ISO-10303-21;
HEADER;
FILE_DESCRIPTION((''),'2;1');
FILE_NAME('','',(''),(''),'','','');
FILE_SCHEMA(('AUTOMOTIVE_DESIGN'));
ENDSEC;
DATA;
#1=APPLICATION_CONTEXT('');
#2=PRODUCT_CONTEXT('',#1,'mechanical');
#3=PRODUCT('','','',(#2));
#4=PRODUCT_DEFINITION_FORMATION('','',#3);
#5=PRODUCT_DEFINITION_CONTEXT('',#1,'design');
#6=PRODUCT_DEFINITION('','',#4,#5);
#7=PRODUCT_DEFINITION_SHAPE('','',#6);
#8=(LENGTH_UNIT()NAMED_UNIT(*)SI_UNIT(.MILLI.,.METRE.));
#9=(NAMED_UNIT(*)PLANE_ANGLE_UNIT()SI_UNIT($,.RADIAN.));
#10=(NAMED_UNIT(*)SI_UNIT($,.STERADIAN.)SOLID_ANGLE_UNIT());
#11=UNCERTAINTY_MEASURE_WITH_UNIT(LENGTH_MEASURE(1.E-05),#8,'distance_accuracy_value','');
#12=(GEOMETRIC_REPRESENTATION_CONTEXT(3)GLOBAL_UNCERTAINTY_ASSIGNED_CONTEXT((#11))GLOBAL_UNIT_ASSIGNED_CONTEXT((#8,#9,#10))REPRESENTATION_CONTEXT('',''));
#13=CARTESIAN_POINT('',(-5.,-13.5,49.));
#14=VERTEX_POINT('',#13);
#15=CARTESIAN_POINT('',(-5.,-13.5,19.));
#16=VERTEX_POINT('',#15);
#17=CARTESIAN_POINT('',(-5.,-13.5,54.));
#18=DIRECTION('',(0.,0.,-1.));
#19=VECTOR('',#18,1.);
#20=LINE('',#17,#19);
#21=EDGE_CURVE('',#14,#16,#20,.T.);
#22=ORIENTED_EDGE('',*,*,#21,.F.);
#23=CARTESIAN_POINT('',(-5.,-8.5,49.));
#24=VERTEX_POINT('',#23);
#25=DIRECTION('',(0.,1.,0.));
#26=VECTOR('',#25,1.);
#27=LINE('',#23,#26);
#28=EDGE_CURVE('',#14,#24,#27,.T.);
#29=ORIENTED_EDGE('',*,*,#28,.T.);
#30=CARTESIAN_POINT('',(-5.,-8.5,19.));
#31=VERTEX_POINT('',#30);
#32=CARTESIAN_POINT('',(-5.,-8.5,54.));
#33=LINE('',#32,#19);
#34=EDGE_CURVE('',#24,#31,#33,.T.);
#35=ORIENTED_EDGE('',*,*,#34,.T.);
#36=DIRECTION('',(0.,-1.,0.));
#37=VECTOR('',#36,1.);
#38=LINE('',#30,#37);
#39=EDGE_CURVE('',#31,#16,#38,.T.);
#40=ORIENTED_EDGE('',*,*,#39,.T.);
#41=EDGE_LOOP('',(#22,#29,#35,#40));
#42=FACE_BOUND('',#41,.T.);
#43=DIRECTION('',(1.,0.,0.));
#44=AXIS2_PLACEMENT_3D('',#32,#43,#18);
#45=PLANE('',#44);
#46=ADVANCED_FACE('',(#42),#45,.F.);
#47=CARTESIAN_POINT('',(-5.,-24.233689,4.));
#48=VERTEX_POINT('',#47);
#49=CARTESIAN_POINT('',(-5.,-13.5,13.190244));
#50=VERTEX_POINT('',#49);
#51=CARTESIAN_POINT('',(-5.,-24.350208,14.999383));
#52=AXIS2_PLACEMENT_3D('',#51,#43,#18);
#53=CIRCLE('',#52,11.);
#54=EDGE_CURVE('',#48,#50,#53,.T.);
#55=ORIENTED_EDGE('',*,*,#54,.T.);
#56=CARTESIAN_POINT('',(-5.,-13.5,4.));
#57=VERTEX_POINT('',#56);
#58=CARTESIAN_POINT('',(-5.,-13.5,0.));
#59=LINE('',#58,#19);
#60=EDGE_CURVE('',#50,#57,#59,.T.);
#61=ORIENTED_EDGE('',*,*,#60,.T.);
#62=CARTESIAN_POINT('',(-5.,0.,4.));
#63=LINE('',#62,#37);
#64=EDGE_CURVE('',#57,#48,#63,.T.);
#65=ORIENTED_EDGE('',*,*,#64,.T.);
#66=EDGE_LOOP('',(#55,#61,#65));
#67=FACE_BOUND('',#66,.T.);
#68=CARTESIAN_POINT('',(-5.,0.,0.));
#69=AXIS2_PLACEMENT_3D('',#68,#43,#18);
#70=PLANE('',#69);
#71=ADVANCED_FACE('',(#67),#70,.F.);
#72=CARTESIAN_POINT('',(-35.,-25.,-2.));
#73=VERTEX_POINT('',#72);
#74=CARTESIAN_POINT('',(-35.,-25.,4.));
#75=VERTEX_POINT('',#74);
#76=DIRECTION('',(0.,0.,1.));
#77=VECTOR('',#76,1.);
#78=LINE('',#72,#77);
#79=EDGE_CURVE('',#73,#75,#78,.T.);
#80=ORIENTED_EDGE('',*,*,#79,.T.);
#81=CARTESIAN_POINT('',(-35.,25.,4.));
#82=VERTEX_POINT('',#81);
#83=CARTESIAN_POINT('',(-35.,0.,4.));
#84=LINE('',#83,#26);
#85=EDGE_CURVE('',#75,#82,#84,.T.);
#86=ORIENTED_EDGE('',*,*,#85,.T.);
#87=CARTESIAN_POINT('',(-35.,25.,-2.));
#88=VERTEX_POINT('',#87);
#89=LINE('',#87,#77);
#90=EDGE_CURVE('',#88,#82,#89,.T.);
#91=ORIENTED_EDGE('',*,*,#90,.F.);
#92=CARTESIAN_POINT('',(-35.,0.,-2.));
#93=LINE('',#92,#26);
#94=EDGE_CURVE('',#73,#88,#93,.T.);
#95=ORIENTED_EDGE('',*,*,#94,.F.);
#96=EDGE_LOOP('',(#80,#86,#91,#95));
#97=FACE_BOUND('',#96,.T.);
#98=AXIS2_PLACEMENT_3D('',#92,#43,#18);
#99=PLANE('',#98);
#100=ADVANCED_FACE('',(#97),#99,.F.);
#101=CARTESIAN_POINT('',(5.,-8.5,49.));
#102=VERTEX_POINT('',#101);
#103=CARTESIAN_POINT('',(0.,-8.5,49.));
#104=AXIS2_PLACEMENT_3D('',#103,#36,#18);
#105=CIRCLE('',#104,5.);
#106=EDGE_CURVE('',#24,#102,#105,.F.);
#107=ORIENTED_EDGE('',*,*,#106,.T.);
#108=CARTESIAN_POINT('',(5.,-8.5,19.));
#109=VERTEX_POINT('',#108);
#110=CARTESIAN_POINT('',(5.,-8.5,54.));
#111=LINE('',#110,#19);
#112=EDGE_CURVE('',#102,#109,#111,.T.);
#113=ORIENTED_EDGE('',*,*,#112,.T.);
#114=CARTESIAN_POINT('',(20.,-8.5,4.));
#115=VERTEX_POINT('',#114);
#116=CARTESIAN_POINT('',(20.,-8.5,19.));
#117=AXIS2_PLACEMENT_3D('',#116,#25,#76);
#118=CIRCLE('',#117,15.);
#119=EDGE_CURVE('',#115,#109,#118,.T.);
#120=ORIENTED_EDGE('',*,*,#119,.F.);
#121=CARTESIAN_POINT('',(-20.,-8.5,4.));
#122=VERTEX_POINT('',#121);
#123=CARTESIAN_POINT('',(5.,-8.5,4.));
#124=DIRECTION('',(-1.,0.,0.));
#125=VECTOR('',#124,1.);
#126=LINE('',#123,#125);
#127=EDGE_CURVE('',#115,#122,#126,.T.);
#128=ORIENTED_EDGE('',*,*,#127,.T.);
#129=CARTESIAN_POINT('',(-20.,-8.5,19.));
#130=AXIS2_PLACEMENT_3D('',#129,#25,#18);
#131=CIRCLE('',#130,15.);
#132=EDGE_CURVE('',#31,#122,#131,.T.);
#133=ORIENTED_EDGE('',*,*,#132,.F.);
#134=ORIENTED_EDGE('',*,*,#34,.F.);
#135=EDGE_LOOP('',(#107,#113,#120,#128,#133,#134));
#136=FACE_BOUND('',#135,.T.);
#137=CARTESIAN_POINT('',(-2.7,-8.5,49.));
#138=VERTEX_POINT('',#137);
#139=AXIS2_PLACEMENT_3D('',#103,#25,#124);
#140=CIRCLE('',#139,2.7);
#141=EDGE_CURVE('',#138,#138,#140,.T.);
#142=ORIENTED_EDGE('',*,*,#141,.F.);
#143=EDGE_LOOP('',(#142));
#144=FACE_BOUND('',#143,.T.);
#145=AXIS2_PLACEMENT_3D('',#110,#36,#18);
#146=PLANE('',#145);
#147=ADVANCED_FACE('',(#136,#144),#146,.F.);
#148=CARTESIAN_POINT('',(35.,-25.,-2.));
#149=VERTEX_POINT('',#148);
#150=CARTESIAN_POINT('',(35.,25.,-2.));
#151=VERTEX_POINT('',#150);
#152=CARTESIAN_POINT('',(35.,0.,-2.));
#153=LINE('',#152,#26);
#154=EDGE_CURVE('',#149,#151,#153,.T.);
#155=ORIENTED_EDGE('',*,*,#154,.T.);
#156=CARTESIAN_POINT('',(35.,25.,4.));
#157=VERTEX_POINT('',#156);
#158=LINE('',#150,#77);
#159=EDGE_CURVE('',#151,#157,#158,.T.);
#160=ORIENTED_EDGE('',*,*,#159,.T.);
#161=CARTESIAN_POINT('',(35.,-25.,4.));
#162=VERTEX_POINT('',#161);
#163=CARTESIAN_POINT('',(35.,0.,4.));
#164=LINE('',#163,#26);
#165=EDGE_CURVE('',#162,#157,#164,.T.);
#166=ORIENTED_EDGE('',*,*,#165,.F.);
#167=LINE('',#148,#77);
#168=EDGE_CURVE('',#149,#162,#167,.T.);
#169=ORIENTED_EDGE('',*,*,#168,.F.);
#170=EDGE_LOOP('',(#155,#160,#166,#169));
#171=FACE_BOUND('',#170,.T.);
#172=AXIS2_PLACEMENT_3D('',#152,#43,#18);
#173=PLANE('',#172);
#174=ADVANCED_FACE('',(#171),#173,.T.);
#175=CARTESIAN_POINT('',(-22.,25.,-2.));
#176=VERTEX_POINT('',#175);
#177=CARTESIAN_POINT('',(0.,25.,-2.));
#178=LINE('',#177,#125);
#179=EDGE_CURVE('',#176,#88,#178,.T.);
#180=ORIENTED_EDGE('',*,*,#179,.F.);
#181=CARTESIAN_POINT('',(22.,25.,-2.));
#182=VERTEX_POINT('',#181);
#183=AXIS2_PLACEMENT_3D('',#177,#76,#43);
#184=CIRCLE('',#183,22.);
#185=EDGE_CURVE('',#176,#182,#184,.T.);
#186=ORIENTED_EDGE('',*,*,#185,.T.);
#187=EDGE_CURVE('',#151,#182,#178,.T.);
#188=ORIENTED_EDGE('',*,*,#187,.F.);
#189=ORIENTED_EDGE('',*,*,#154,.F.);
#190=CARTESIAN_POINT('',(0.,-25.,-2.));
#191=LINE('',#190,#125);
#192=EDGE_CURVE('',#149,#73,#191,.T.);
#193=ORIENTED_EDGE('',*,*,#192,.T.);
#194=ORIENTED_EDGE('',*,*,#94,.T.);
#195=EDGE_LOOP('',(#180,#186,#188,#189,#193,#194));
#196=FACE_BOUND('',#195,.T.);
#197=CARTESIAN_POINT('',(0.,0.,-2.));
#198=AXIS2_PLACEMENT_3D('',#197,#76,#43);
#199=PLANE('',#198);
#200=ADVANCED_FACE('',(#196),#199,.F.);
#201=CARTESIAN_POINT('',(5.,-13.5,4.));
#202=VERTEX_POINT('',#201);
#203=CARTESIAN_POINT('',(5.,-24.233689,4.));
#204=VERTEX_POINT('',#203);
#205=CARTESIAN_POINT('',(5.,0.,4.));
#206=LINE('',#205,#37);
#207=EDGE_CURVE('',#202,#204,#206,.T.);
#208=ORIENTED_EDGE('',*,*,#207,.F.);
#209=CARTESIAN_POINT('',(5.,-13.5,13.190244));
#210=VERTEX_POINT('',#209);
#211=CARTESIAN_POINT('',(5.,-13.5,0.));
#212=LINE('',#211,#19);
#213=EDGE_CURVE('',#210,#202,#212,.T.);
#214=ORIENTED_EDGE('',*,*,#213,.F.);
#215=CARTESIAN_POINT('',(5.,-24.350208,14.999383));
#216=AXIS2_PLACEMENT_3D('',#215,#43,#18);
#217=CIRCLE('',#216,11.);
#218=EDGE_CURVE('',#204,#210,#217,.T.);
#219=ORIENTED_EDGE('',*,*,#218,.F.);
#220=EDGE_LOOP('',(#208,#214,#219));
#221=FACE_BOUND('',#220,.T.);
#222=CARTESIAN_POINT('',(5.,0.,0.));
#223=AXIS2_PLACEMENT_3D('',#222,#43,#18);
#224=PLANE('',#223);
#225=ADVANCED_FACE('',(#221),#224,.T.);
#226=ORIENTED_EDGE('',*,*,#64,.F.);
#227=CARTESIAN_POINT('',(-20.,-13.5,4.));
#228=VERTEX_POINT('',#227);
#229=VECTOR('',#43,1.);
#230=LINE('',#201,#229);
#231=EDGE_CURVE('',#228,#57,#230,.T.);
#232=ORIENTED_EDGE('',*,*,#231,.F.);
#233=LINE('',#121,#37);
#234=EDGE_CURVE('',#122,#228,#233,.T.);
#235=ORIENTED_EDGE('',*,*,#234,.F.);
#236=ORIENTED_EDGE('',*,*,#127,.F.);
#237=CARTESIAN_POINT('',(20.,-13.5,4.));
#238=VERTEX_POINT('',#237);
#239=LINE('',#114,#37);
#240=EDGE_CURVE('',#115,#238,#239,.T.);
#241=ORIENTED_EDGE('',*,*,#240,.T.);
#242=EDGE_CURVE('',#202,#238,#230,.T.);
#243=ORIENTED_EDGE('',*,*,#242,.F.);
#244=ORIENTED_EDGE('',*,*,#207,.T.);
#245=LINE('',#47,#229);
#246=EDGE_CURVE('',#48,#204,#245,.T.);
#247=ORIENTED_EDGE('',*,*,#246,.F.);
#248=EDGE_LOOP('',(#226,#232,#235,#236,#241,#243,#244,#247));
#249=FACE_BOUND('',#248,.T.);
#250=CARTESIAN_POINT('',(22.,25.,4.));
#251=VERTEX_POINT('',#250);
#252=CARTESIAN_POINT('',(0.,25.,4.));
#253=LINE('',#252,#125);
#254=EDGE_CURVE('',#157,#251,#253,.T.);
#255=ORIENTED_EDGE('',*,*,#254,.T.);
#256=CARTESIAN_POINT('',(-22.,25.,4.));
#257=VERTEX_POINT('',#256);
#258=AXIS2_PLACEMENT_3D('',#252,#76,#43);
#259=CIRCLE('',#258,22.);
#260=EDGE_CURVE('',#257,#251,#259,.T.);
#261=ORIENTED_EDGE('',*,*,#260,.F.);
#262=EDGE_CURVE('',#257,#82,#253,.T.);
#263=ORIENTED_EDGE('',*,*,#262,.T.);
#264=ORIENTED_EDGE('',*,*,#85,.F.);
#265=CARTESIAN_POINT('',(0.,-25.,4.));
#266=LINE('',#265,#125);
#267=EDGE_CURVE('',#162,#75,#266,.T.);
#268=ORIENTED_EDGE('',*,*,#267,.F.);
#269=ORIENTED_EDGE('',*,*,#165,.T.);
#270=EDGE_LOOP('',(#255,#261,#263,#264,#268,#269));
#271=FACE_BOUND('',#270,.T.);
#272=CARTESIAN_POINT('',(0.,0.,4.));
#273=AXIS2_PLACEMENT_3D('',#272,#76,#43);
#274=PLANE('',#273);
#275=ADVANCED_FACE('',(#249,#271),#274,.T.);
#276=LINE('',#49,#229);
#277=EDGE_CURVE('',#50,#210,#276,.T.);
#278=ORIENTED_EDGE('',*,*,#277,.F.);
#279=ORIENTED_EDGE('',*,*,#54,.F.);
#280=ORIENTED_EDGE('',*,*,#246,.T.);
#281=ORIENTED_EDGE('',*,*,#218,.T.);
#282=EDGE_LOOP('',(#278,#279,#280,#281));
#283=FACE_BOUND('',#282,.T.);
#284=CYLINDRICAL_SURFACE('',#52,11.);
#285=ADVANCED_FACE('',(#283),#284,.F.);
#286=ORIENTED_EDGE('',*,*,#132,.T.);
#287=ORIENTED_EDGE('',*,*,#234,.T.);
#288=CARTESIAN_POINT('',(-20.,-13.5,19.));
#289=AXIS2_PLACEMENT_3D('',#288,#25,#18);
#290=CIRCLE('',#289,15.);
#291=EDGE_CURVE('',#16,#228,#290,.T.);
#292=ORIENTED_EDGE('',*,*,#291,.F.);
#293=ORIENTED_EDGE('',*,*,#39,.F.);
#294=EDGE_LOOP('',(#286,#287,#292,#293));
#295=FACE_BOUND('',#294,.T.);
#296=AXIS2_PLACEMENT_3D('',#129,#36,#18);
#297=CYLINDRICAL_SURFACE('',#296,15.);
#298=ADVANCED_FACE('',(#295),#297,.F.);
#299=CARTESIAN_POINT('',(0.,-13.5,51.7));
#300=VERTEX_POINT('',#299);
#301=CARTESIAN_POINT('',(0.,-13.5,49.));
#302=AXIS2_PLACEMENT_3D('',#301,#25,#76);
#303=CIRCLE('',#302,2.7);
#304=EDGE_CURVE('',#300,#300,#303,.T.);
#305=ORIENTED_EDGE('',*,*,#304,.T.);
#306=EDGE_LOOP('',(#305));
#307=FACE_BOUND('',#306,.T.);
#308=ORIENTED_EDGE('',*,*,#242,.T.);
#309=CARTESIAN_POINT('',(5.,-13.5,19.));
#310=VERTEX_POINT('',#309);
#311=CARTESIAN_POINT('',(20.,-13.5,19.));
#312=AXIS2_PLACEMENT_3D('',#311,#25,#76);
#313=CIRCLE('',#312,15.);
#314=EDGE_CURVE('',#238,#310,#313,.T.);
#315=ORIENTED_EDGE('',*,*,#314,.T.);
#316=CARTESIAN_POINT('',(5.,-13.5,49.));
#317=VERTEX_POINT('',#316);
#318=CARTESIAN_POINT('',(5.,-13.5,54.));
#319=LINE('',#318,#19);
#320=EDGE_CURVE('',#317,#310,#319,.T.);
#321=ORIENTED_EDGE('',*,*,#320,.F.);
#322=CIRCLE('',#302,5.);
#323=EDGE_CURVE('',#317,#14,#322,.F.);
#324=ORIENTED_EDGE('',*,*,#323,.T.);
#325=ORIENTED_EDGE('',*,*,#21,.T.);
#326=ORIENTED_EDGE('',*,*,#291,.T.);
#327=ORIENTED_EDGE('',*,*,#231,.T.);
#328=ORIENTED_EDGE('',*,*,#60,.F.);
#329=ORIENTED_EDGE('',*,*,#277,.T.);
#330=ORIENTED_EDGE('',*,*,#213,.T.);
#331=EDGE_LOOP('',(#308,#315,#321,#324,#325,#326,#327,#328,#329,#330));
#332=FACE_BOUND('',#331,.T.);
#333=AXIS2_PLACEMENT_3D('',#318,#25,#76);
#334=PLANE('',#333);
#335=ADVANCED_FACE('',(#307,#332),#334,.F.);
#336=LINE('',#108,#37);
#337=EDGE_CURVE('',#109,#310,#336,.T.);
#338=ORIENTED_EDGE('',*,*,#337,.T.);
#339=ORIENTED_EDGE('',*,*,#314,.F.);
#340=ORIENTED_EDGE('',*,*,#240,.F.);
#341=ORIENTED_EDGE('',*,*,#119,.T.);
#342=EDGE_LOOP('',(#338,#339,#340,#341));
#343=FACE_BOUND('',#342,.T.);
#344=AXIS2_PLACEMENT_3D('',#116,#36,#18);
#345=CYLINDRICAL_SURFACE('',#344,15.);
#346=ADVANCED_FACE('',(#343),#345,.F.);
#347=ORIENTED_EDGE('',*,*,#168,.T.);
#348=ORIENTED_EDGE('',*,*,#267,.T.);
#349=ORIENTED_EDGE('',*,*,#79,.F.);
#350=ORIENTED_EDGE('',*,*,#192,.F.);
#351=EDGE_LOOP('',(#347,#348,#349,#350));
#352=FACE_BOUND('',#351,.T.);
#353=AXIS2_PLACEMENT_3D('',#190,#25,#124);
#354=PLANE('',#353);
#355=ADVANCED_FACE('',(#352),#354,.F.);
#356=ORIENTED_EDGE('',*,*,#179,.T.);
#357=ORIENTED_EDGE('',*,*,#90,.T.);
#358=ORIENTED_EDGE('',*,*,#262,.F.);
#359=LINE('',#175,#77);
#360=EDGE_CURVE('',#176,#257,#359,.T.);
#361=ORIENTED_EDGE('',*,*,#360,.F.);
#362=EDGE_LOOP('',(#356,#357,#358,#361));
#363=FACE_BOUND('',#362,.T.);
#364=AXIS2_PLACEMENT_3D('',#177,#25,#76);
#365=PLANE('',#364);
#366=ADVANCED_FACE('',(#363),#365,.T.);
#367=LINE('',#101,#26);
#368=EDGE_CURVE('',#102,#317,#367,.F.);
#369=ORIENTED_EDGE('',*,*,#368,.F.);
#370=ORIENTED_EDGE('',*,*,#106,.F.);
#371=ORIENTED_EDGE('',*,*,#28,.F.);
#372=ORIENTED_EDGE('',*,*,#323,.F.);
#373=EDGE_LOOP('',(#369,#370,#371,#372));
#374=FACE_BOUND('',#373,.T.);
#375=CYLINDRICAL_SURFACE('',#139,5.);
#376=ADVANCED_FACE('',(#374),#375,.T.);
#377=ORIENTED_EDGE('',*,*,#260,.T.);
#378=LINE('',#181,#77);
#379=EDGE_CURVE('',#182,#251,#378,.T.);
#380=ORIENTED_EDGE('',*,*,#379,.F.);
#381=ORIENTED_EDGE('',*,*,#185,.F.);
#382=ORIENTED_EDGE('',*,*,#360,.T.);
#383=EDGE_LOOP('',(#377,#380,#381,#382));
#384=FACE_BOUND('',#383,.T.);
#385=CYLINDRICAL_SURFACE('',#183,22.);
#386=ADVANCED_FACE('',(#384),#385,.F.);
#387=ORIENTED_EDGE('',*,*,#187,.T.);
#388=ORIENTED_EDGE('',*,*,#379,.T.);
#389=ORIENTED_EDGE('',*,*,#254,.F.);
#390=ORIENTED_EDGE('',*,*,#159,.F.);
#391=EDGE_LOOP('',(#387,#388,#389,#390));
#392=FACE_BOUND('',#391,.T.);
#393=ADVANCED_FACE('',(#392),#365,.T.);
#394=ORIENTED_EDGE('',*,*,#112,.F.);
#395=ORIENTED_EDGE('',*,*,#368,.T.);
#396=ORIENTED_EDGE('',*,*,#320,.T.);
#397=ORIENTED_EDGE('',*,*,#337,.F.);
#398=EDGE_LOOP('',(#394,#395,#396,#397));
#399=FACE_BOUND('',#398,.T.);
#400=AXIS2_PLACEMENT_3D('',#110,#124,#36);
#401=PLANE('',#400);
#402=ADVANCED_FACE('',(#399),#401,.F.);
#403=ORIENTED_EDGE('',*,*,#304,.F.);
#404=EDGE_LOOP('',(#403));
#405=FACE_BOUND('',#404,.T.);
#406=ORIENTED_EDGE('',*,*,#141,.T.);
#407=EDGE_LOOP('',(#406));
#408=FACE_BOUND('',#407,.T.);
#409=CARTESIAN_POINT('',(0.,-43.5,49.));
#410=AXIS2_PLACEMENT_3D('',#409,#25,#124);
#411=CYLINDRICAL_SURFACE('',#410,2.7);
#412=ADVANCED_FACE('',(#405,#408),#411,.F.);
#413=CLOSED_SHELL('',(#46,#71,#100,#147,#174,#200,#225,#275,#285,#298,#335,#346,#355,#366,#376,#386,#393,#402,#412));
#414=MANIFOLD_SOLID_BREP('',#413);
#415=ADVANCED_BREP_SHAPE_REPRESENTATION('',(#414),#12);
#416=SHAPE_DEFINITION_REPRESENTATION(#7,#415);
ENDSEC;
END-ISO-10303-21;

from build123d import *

# Parameters (mm, degrees)
BOSS_EXTRUDE1_DEPTH      = 4
BOSS_EXTRUDE1_DEPTH_BACK = 2
SKETCH2_W                = 10
SKETCH2_H                = 5
BOSS_EXTRUDE2_DEPTH      = 50
FILLET1_RADIUS           = 5
FILLET1_LENGTH           = 5
SKETCH3_R                = 2.7
CUT_EXTRUDE1_DEPTH       = 35
BOSS_EXTRUDE3_DEPTH      = 5
BOSS_EXTRUDE5_START      = -5
BOSS_EXTRUDE5_DEPTH      = 10


# Read off the part's stored shape, not the designer's step: Boss-Extrude5
with BuildPart() as part:
    # Sketch1 → Boss-Extrude1 (new, two sides: drawn at the far end of the back side and taken through both)
    with BuildSketch(Plane.XY.offset(-BOSS_EXTRUDE1_DEPTH_BACK)):
        with BuildLine():
            Line((-35, -25), (35, -25))
            Line((35, -25), (35, 25))
            Line((35, 25), (22, 25))
            ThreePointArc((22, 25), (0, 3), (-22, 25))
            Line((-22, 25), (-35, 25))
            Line((-35, 25), (-35, -25))
        make_face()
    extrude(amount=BOSS_EXTRUDE1_DEPTH + BOSS_EXTRUDE1_DEPTH_BACK)

    # Sketch2 → Boss-Extrude2 (add)
    with BuildSketch(Plane.XY.offset(4)):
        with Locations((0, -11)):
            Rectangle(SKETCH2_W, SKETCH2_H)
    extrude(amount=BOSS_EXTRUDE2_DEPTH)

    # Fillet1: full round fillet: the end face becomes a half cylinder, R = half its width
    fillet1_face = Plane((0, -11, 54), x_dir=(0, -1, 0), z_dir=(0, 0, 1))  # on the end face: x along it, z out of the body
    fillet1_slab = fillet1_face.offset(-FILLET1_RADIUS / 2) * Box(FILLET1_LENGTH, 2 * FILLET1_RADIUS, FILLET1_RADIUS, mode=Mode.PRIVATE)  # the body's end, R deep
    fillet1_round = Plane((0, -11, 49), x_dir=(0, 0, 1), z_dir=(0, -1, 0)) * Cylinder(FILLET1_RADIUS, FILLET1_LENGTH, mode=Mode.PRIVATE)  # its axis R under the face
    add(fillet1_slab - fillet1_round, mode=Mode.SUBTRACT)

    # Sketch3 → Cut-Extrude1 (cut)
    with BuildSketch(Plane(origin=(0, -8.5, 0), x_dir=(1, 0, 0), z_dir=(0, 1, 0))):
        with Locations(Location((0, -49, 0), (0, 0, 180))):
            Circle(SKETCH3_R)
    extrude(amount=-CUT_EXTRUDE1_DEPTH, mode=Mode.SUBTRACT)

    # Sketch6 → Boss-Extrude3 (add)
    with BuildSketch(Plane.XZ.offset(13.5)):
        with BuildLine():
            Line((5, 4), (20, 4))
            ThreePointArc((20, 4), (9.393398282, 8.393398282), (5, 19))
            Line((5, 19), (5, 4))
        make_face()
        with BuildLine():
            Line((-5, 4), (-20, 4))
            ThreePointArc((-20, 4), (-9.393398282, 8.393398282), (-5, 19))
            Line((-5, 19), (-5, 4))
        make_face()
    extrude(amount=-BOSS_EXTRUDE3_DEPTH)

    # Boss-Extrude5 outline → Boss-Extrude5 (add)
    with BuildSketch(Plane(origin=(0, 0, 0), x_dir=(0, 0, -1), z_dir=(1, 0, 0)).offset(BOSS_EXTRUDE5_START)):
        with BuildLine():
            ThreePointArc((-13.190244239, -13.5), (-6.643691612, -17.19601893), (-4, -24.233689133))
            Line((-4, -24.233689133), (-4, -13.5))
            Line((-4, -13.5), (-13.190244239, -13.5))
        make_face()
    extrude(amount=BOSS_EXTRUDE5_DEPTH)


solid = part.part
